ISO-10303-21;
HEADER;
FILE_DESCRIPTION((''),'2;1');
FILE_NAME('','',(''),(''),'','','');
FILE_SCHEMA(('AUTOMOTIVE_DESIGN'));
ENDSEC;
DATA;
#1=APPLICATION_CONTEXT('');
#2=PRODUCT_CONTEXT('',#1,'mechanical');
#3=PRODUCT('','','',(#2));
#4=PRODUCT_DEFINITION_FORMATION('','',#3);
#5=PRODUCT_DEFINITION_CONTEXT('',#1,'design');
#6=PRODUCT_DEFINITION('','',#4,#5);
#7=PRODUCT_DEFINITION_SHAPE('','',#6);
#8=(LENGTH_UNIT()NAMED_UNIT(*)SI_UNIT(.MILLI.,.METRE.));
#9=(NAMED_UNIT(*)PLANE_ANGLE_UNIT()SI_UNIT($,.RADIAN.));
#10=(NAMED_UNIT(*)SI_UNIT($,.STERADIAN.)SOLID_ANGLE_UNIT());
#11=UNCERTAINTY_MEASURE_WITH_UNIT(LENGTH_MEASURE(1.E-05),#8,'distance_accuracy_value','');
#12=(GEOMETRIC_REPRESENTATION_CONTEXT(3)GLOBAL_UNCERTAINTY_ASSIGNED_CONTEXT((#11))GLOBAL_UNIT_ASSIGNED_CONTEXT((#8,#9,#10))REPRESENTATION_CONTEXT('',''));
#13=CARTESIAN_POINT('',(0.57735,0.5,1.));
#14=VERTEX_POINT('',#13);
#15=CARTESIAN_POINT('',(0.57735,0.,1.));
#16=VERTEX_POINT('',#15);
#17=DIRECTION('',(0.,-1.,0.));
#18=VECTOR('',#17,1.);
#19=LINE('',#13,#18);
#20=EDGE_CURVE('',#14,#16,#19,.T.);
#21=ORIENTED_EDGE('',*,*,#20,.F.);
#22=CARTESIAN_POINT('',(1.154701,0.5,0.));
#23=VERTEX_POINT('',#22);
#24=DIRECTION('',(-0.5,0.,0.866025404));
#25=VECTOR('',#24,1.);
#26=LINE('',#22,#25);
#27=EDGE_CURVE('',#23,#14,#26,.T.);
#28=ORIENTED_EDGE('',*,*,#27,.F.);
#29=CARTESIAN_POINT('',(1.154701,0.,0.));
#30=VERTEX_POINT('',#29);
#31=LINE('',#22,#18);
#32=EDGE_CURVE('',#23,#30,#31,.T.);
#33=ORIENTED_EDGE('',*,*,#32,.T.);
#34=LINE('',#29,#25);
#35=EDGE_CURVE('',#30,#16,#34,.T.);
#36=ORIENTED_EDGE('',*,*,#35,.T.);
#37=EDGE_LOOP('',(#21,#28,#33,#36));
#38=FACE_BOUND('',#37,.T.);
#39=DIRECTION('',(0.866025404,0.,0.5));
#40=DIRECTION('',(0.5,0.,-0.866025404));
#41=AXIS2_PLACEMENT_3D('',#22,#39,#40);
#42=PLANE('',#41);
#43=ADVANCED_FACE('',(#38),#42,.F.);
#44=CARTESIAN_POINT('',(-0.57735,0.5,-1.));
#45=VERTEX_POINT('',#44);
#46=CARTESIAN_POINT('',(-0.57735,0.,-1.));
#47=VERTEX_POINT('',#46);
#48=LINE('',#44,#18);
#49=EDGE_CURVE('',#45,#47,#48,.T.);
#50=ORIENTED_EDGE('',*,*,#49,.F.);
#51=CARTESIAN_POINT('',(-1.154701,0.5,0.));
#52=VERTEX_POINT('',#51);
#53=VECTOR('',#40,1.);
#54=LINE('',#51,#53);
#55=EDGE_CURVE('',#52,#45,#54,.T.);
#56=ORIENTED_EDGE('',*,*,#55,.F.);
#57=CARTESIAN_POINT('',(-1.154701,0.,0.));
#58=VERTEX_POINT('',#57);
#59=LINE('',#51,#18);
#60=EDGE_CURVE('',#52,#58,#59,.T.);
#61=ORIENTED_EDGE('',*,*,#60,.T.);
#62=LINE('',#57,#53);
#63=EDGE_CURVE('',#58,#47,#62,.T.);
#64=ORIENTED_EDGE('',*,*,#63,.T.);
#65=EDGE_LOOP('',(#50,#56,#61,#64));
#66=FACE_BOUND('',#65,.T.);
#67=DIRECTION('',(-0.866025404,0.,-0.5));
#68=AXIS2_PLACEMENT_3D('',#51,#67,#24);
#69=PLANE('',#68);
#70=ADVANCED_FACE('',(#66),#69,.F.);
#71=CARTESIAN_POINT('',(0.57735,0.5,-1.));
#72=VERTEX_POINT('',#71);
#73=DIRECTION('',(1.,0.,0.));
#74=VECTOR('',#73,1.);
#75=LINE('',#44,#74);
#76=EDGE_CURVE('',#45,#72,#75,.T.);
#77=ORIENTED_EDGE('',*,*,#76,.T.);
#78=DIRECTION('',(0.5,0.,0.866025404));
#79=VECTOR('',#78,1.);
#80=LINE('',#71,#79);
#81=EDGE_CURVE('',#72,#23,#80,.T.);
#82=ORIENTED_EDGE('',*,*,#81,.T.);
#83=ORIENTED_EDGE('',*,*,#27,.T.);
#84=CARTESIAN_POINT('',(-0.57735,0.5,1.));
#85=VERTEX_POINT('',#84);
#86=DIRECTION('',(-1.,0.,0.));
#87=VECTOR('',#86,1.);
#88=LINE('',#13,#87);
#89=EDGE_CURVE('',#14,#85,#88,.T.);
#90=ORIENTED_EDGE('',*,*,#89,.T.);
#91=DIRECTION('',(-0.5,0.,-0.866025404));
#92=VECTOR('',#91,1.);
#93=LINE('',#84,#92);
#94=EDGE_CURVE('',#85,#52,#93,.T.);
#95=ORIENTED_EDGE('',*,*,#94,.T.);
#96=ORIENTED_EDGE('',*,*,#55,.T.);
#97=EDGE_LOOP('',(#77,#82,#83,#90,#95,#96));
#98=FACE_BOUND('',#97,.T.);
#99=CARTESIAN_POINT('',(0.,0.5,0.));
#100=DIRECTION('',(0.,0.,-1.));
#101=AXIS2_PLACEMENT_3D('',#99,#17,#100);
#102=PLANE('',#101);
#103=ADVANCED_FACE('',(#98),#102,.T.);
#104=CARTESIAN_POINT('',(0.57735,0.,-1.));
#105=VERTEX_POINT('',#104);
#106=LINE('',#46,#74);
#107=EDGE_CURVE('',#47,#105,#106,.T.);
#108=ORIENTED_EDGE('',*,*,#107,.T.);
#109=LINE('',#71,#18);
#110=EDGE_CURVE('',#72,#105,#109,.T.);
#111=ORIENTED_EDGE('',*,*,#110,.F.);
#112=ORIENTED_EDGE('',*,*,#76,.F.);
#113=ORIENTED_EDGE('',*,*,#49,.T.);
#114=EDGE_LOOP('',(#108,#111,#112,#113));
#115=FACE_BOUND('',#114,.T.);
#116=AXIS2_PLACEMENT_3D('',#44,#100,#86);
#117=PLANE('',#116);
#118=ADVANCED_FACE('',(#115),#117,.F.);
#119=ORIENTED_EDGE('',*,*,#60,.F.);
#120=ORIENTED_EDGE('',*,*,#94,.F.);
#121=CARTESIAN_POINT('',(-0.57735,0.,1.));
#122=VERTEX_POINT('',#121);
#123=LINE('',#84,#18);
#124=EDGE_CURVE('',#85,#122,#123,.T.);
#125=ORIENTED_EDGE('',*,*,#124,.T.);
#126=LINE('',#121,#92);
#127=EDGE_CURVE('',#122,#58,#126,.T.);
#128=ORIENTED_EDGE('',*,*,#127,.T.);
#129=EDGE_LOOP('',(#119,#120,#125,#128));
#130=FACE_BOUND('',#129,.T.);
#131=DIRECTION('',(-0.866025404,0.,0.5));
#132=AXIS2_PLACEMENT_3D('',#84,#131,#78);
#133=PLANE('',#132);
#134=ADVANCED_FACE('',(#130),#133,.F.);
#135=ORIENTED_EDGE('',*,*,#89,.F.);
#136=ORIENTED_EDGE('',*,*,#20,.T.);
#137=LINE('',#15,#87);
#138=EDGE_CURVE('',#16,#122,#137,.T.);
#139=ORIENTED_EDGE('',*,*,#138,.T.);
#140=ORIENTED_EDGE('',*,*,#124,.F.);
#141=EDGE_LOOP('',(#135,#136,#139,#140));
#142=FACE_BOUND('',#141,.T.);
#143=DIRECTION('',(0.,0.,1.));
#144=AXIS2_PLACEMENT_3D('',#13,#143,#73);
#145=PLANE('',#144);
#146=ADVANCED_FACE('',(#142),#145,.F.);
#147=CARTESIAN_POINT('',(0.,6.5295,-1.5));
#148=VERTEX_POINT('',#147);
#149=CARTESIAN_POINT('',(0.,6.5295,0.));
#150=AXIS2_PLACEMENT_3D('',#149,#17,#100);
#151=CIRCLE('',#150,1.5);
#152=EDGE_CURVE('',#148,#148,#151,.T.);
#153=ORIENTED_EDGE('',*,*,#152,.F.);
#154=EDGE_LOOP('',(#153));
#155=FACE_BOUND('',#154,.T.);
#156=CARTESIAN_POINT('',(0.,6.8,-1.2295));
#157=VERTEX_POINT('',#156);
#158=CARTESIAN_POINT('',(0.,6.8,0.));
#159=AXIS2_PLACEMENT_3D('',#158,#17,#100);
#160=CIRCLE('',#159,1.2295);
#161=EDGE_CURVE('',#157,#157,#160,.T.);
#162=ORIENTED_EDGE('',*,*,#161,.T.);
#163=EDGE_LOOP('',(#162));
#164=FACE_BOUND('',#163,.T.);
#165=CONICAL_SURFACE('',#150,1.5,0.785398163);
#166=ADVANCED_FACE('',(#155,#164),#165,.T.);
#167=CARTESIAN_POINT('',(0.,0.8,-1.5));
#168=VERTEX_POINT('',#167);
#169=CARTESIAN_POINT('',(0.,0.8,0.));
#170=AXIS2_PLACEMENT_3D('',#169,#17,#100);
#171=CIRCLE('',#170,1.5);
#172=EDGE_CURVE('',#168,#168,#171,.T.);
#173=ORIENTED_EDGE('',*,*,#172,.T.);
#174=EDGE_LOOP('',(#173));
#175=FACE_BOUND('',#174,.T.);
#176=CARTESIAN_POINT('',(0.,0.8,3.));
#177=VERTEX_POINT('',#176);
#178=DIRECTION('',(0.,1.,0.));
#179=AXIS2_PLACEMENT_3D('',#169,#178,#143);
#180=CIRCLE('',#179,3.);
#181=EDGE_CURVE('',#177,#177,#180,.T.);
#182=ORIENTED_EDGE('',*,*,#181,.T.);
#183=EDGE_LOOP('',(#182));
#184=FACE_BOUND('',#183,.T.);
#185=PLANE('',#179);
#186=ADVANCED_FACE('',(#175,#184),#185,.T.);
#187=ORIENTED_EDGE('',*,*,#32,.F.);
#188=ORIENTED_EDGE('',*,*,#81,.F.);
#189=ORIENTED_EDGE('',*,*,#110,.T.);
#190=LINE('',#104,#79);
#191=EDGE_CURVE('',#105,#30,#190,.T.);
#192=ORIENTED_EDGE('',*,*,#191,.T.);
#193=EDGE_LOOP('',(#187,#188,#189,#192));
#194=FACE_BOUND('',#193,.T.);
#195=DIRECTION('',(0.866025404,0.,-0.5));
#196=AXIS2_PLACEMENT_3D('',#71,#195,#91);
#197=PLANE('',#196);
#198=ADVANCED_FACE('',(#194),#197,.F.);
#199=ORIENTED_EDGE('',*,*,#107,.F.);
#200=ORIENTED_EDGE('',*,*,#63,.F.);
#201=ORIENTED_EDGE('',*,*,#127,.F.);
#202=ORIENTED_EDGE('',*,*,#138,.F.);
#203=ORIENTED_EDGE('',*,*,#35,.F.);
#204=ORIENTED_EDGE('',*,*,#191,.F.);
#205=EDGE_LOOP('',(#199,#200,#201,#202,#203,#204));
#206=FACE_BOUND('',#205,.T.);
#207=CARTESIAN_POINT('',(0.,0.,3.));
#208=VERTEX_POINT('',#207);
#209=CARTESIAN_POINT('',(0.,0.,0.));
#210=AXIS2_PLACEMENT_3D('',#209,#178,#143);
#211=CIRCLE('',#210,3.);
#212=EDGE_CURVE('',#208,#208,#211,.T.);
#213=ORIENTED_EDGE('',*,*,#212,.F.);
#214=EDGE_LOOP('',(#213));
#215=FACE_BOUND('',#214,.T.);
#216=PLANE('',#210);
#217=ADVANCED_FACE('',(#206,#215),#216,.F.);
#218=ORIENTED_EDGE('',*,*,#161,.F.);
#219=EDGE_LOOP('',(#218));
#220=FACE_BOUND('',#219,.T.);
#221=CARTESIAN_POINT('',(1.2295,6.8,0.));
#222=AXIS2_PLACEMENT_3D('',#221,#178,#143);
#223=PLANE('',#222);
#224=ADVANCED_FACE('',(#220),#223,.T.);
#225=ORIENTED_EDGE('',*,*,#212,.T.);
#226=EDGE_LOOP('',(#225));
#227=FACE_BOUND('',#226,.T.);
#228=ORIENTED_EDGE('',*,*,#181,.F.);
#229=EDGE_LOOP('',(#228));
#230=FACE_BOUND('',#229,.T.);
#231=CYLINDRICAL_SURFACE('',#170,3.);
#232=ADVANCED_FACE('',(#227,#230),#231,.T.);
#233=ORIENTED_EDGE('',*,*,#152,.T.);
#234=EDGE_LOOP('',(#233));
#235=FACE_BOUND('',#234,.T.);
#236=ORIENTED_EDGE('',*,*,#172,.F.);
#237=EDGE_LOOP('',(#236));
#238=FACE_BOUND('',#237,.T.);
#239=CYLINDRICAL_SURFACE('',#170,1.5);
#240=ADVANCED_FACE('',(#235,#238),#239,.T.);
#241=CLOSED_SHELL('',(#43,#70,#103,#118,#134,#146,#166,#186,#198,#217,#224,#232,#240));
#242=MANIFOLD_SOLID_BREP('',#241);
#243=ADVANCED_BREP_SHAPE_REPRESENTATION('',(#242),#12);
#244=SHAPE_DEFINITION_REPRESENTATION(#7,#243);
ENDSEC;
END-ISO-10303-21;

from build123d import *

# Parameters (mm, degrees)
SKETCH_1_R          = 3
EXTRUDE_1_DEPTH     = 0.8
CUT_EXTRUDE_1_DEPTH = 0.5


# Read off the part's stored shape, not the designer's step: M3 机械螺纹 螺柱3
with BuildPart() as part:
    # 草图1 → 凸台-拉伸1 (new body)
    with BuildSketch(Plane(origin=(0, 0, 0), x_dir=(1, 0, 0), z_dir=(0, 1, 0))):
        with Locations(Location((0, 0, 0), (0, 0, 270))):
            Circle(SKETCH_1_R)
    extrude(amount=EXTRUDE_1_DEPTH)

    # M3 机械螺纹 螺柱3 outline → M3 机械螺纹 螺柱3 (revolve)
    with BuildSketch(Plane.XY):
        Polygon((1.2295, 6.8), (0, 6.8), (0, 0.8), (1.5, 0.8), (1.5, 6.5295), align=None)
    revolve(axis=Axis((0, 0, 0), (0, 1, 0)))

    # 草图8 → 切除-拉伸1 (cut)
    with BuildSketch(Plane.XZ):
        Polygon((1.154700538, 0), (0.577350269, 1), (-0.577350269, 1), (-1.154700538, 0), (-0.577350269, -1), (0.577350269, -1), align=None)
    extrude(amount=-CUT_EXTRUDE_1_DEPTH, mode=Mode.SUBTRACT)


solid = part.part
